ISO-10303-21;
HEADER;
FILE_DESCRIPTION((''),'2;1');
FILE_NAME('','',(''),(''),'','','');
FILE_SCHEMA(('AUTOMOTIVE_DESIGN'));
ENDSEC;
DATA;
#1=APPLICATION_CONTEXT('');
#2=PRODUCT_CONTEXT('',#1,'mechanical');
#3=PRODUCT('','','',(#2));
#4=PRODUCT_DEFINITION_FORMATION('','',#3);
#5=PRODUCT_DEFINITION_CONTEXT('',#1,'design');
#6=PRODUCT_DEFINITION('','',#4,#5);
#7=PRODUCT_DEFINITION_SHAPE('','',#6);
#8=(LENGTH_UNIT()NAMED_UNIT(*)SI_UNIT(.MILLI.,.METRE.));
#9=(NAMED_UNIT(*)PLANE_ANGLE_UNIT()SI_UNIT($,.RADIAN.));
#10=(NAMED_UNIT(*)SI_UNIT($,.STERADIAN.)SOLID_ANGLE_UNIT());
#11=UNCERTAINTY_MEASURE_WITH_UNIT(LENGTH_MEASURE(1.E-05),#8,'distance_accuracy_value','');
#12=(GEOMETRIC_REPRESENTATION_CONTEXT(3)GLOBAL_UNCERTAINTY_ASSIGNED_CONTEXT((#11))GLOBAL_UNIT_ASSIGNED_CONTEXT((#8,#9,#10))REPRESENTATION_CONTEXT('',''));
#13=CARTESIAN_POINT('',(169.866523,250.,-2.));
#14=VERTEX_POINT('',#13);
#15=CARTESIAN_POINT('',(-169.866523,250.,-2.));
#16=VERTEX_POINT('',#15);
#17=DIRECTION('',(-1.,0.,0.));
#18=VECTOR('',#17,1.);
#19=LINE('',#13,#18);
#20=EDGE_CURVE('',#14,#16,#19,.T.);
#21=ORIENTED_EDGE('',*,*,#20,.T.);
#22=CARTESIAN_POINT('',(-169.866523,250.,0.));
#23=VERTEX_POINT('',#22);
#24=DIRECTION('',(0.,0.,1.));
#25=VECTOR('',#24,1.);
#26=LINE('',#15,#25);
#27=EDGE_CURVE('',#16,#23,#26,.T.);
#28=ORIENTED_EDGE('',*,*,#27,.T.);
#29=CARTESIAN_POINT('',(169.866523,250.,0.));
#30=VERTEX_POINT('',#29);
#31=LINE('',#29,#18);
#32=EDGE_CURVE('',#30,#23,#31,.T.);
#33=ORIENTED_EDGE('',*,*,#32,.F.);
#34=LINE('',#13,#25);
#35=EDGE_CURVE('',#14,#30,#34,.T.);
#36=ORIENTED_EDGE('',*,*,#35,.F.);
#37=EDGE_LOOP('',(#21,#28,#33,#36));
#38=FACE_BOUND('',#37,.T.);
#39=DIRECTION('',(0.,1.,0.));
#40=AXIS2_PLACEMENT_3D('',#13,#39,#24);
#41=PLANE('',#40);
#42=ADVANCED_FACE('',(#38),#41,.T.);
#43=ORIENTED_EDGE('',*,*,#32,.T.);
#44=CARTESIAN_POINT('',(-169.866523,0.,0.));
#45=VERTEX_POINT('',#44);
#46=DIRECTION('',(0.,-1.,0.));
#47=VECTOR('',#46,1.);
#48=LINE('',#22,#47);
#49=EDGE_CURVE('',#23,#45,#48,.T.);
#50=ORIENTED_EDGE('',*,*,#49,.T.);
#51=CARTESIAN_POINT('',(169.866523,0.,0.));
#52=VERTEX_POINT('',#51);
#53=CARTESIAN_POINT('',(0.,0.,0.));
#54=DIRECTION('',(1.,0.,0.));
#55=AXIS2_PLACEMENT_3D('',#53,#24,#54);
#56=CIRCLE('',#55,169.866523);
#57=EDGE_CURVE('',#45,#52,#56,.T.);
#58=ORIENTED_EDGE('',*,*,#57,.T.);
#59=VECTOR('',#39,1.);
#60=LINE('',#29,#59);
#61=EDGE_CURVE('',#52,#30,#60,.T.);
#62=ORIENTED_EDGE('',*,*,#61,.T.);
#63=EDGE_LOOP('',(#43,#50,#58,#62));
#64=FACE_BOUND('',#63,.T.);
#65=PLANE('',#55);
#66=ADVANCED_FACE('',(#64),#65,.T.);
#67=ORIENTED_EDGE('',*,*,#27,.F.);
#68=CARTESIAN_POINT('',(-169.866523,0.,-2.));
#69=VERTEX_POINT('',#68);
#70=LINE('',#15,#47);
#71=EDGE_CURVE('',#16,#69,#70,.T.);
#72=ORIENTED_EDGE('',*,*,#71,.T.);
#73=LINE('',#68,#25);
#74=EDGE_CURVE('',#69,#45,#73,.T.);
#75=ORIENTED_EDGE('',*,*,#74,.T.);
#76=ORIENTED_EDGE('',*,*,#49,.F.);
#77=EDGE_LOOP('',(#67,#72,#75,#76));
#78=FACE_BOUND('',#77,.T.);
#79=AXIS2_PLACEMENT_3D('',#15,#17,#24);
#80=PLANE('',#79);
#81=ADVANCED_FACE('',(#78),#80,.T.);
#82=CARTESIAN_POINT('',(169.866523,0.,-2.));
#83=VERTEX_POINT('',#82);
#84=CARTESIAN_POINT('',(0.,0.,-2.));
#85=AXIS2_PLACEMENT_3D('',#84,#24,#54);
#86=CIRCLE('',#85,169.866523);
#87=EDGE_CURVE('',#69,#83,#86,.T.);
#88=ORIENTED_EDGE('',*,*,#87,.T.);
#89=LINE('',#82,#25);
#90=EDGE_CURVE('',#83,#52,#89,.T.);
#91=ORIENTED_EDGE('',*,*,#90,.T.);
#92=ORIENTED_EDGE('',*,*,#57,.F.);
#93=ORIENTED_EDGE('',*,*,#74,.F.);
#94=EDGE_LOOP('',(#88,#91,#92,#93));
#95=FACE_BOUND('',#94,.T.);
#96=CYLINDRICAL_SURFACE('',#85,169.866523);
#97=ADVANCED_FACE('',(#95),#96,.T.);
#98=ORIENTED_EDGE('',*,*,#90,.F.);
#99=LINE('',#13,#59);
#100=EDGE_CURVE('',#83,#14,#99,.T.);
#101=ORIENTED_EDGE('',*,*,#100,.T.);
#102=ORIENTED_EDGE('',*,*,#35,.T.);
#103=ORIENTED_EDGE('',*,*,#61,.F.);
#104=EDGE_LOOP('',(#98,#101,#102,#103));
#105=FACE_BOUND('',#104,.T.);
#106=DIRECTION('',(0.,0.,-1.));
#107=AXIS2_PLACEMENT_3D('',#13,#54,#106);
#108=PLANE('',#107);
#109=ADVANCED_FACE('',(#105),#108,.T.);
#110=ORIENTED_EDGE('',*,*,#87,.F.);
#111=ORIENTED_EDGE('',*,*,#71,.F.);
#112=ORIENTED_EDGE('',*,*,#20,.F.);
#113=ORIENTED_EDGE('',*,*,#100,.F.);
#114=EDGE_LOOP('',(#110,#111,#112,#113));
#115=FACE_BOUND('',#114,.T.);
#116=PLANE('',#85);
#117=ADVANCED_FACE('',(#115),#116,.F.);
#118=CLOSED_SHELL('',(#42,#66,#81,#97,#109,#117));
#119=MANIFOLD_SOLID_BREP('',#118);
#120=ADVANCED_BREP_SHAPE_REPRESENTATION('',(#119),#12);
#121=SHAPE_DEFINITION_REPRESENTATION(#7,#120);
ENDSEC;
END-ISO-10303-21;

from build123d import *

# Parameters (mm, degrees)
BASE_FLANGE1_DEPTH = 2


# Sheet-metal steps are written as plain solids
with BuildPart() as part:
    # Sketch1 → Base-Flange1 (new body)
    with BuildSketch(Plane(origin=(0, 0, 0), x_dir=(-1, 0, 0), z_dir=(0, 0, 1))):
        with BuildLine():
            Line((-169.8665231, -250), (-169.8665231, 0))
            ThreePointArc((-169.8665231, 0), (0, 169.8665231), (169.8665231, 0))
            Line((169.8665231, 0), (169.8665231, -250))
            Line((169.8665231, -250), (-169.8665231, -250))
        make_face()
    extrude(amount=-BASE_FLANGE1_DEPTH)


solid = part.part
